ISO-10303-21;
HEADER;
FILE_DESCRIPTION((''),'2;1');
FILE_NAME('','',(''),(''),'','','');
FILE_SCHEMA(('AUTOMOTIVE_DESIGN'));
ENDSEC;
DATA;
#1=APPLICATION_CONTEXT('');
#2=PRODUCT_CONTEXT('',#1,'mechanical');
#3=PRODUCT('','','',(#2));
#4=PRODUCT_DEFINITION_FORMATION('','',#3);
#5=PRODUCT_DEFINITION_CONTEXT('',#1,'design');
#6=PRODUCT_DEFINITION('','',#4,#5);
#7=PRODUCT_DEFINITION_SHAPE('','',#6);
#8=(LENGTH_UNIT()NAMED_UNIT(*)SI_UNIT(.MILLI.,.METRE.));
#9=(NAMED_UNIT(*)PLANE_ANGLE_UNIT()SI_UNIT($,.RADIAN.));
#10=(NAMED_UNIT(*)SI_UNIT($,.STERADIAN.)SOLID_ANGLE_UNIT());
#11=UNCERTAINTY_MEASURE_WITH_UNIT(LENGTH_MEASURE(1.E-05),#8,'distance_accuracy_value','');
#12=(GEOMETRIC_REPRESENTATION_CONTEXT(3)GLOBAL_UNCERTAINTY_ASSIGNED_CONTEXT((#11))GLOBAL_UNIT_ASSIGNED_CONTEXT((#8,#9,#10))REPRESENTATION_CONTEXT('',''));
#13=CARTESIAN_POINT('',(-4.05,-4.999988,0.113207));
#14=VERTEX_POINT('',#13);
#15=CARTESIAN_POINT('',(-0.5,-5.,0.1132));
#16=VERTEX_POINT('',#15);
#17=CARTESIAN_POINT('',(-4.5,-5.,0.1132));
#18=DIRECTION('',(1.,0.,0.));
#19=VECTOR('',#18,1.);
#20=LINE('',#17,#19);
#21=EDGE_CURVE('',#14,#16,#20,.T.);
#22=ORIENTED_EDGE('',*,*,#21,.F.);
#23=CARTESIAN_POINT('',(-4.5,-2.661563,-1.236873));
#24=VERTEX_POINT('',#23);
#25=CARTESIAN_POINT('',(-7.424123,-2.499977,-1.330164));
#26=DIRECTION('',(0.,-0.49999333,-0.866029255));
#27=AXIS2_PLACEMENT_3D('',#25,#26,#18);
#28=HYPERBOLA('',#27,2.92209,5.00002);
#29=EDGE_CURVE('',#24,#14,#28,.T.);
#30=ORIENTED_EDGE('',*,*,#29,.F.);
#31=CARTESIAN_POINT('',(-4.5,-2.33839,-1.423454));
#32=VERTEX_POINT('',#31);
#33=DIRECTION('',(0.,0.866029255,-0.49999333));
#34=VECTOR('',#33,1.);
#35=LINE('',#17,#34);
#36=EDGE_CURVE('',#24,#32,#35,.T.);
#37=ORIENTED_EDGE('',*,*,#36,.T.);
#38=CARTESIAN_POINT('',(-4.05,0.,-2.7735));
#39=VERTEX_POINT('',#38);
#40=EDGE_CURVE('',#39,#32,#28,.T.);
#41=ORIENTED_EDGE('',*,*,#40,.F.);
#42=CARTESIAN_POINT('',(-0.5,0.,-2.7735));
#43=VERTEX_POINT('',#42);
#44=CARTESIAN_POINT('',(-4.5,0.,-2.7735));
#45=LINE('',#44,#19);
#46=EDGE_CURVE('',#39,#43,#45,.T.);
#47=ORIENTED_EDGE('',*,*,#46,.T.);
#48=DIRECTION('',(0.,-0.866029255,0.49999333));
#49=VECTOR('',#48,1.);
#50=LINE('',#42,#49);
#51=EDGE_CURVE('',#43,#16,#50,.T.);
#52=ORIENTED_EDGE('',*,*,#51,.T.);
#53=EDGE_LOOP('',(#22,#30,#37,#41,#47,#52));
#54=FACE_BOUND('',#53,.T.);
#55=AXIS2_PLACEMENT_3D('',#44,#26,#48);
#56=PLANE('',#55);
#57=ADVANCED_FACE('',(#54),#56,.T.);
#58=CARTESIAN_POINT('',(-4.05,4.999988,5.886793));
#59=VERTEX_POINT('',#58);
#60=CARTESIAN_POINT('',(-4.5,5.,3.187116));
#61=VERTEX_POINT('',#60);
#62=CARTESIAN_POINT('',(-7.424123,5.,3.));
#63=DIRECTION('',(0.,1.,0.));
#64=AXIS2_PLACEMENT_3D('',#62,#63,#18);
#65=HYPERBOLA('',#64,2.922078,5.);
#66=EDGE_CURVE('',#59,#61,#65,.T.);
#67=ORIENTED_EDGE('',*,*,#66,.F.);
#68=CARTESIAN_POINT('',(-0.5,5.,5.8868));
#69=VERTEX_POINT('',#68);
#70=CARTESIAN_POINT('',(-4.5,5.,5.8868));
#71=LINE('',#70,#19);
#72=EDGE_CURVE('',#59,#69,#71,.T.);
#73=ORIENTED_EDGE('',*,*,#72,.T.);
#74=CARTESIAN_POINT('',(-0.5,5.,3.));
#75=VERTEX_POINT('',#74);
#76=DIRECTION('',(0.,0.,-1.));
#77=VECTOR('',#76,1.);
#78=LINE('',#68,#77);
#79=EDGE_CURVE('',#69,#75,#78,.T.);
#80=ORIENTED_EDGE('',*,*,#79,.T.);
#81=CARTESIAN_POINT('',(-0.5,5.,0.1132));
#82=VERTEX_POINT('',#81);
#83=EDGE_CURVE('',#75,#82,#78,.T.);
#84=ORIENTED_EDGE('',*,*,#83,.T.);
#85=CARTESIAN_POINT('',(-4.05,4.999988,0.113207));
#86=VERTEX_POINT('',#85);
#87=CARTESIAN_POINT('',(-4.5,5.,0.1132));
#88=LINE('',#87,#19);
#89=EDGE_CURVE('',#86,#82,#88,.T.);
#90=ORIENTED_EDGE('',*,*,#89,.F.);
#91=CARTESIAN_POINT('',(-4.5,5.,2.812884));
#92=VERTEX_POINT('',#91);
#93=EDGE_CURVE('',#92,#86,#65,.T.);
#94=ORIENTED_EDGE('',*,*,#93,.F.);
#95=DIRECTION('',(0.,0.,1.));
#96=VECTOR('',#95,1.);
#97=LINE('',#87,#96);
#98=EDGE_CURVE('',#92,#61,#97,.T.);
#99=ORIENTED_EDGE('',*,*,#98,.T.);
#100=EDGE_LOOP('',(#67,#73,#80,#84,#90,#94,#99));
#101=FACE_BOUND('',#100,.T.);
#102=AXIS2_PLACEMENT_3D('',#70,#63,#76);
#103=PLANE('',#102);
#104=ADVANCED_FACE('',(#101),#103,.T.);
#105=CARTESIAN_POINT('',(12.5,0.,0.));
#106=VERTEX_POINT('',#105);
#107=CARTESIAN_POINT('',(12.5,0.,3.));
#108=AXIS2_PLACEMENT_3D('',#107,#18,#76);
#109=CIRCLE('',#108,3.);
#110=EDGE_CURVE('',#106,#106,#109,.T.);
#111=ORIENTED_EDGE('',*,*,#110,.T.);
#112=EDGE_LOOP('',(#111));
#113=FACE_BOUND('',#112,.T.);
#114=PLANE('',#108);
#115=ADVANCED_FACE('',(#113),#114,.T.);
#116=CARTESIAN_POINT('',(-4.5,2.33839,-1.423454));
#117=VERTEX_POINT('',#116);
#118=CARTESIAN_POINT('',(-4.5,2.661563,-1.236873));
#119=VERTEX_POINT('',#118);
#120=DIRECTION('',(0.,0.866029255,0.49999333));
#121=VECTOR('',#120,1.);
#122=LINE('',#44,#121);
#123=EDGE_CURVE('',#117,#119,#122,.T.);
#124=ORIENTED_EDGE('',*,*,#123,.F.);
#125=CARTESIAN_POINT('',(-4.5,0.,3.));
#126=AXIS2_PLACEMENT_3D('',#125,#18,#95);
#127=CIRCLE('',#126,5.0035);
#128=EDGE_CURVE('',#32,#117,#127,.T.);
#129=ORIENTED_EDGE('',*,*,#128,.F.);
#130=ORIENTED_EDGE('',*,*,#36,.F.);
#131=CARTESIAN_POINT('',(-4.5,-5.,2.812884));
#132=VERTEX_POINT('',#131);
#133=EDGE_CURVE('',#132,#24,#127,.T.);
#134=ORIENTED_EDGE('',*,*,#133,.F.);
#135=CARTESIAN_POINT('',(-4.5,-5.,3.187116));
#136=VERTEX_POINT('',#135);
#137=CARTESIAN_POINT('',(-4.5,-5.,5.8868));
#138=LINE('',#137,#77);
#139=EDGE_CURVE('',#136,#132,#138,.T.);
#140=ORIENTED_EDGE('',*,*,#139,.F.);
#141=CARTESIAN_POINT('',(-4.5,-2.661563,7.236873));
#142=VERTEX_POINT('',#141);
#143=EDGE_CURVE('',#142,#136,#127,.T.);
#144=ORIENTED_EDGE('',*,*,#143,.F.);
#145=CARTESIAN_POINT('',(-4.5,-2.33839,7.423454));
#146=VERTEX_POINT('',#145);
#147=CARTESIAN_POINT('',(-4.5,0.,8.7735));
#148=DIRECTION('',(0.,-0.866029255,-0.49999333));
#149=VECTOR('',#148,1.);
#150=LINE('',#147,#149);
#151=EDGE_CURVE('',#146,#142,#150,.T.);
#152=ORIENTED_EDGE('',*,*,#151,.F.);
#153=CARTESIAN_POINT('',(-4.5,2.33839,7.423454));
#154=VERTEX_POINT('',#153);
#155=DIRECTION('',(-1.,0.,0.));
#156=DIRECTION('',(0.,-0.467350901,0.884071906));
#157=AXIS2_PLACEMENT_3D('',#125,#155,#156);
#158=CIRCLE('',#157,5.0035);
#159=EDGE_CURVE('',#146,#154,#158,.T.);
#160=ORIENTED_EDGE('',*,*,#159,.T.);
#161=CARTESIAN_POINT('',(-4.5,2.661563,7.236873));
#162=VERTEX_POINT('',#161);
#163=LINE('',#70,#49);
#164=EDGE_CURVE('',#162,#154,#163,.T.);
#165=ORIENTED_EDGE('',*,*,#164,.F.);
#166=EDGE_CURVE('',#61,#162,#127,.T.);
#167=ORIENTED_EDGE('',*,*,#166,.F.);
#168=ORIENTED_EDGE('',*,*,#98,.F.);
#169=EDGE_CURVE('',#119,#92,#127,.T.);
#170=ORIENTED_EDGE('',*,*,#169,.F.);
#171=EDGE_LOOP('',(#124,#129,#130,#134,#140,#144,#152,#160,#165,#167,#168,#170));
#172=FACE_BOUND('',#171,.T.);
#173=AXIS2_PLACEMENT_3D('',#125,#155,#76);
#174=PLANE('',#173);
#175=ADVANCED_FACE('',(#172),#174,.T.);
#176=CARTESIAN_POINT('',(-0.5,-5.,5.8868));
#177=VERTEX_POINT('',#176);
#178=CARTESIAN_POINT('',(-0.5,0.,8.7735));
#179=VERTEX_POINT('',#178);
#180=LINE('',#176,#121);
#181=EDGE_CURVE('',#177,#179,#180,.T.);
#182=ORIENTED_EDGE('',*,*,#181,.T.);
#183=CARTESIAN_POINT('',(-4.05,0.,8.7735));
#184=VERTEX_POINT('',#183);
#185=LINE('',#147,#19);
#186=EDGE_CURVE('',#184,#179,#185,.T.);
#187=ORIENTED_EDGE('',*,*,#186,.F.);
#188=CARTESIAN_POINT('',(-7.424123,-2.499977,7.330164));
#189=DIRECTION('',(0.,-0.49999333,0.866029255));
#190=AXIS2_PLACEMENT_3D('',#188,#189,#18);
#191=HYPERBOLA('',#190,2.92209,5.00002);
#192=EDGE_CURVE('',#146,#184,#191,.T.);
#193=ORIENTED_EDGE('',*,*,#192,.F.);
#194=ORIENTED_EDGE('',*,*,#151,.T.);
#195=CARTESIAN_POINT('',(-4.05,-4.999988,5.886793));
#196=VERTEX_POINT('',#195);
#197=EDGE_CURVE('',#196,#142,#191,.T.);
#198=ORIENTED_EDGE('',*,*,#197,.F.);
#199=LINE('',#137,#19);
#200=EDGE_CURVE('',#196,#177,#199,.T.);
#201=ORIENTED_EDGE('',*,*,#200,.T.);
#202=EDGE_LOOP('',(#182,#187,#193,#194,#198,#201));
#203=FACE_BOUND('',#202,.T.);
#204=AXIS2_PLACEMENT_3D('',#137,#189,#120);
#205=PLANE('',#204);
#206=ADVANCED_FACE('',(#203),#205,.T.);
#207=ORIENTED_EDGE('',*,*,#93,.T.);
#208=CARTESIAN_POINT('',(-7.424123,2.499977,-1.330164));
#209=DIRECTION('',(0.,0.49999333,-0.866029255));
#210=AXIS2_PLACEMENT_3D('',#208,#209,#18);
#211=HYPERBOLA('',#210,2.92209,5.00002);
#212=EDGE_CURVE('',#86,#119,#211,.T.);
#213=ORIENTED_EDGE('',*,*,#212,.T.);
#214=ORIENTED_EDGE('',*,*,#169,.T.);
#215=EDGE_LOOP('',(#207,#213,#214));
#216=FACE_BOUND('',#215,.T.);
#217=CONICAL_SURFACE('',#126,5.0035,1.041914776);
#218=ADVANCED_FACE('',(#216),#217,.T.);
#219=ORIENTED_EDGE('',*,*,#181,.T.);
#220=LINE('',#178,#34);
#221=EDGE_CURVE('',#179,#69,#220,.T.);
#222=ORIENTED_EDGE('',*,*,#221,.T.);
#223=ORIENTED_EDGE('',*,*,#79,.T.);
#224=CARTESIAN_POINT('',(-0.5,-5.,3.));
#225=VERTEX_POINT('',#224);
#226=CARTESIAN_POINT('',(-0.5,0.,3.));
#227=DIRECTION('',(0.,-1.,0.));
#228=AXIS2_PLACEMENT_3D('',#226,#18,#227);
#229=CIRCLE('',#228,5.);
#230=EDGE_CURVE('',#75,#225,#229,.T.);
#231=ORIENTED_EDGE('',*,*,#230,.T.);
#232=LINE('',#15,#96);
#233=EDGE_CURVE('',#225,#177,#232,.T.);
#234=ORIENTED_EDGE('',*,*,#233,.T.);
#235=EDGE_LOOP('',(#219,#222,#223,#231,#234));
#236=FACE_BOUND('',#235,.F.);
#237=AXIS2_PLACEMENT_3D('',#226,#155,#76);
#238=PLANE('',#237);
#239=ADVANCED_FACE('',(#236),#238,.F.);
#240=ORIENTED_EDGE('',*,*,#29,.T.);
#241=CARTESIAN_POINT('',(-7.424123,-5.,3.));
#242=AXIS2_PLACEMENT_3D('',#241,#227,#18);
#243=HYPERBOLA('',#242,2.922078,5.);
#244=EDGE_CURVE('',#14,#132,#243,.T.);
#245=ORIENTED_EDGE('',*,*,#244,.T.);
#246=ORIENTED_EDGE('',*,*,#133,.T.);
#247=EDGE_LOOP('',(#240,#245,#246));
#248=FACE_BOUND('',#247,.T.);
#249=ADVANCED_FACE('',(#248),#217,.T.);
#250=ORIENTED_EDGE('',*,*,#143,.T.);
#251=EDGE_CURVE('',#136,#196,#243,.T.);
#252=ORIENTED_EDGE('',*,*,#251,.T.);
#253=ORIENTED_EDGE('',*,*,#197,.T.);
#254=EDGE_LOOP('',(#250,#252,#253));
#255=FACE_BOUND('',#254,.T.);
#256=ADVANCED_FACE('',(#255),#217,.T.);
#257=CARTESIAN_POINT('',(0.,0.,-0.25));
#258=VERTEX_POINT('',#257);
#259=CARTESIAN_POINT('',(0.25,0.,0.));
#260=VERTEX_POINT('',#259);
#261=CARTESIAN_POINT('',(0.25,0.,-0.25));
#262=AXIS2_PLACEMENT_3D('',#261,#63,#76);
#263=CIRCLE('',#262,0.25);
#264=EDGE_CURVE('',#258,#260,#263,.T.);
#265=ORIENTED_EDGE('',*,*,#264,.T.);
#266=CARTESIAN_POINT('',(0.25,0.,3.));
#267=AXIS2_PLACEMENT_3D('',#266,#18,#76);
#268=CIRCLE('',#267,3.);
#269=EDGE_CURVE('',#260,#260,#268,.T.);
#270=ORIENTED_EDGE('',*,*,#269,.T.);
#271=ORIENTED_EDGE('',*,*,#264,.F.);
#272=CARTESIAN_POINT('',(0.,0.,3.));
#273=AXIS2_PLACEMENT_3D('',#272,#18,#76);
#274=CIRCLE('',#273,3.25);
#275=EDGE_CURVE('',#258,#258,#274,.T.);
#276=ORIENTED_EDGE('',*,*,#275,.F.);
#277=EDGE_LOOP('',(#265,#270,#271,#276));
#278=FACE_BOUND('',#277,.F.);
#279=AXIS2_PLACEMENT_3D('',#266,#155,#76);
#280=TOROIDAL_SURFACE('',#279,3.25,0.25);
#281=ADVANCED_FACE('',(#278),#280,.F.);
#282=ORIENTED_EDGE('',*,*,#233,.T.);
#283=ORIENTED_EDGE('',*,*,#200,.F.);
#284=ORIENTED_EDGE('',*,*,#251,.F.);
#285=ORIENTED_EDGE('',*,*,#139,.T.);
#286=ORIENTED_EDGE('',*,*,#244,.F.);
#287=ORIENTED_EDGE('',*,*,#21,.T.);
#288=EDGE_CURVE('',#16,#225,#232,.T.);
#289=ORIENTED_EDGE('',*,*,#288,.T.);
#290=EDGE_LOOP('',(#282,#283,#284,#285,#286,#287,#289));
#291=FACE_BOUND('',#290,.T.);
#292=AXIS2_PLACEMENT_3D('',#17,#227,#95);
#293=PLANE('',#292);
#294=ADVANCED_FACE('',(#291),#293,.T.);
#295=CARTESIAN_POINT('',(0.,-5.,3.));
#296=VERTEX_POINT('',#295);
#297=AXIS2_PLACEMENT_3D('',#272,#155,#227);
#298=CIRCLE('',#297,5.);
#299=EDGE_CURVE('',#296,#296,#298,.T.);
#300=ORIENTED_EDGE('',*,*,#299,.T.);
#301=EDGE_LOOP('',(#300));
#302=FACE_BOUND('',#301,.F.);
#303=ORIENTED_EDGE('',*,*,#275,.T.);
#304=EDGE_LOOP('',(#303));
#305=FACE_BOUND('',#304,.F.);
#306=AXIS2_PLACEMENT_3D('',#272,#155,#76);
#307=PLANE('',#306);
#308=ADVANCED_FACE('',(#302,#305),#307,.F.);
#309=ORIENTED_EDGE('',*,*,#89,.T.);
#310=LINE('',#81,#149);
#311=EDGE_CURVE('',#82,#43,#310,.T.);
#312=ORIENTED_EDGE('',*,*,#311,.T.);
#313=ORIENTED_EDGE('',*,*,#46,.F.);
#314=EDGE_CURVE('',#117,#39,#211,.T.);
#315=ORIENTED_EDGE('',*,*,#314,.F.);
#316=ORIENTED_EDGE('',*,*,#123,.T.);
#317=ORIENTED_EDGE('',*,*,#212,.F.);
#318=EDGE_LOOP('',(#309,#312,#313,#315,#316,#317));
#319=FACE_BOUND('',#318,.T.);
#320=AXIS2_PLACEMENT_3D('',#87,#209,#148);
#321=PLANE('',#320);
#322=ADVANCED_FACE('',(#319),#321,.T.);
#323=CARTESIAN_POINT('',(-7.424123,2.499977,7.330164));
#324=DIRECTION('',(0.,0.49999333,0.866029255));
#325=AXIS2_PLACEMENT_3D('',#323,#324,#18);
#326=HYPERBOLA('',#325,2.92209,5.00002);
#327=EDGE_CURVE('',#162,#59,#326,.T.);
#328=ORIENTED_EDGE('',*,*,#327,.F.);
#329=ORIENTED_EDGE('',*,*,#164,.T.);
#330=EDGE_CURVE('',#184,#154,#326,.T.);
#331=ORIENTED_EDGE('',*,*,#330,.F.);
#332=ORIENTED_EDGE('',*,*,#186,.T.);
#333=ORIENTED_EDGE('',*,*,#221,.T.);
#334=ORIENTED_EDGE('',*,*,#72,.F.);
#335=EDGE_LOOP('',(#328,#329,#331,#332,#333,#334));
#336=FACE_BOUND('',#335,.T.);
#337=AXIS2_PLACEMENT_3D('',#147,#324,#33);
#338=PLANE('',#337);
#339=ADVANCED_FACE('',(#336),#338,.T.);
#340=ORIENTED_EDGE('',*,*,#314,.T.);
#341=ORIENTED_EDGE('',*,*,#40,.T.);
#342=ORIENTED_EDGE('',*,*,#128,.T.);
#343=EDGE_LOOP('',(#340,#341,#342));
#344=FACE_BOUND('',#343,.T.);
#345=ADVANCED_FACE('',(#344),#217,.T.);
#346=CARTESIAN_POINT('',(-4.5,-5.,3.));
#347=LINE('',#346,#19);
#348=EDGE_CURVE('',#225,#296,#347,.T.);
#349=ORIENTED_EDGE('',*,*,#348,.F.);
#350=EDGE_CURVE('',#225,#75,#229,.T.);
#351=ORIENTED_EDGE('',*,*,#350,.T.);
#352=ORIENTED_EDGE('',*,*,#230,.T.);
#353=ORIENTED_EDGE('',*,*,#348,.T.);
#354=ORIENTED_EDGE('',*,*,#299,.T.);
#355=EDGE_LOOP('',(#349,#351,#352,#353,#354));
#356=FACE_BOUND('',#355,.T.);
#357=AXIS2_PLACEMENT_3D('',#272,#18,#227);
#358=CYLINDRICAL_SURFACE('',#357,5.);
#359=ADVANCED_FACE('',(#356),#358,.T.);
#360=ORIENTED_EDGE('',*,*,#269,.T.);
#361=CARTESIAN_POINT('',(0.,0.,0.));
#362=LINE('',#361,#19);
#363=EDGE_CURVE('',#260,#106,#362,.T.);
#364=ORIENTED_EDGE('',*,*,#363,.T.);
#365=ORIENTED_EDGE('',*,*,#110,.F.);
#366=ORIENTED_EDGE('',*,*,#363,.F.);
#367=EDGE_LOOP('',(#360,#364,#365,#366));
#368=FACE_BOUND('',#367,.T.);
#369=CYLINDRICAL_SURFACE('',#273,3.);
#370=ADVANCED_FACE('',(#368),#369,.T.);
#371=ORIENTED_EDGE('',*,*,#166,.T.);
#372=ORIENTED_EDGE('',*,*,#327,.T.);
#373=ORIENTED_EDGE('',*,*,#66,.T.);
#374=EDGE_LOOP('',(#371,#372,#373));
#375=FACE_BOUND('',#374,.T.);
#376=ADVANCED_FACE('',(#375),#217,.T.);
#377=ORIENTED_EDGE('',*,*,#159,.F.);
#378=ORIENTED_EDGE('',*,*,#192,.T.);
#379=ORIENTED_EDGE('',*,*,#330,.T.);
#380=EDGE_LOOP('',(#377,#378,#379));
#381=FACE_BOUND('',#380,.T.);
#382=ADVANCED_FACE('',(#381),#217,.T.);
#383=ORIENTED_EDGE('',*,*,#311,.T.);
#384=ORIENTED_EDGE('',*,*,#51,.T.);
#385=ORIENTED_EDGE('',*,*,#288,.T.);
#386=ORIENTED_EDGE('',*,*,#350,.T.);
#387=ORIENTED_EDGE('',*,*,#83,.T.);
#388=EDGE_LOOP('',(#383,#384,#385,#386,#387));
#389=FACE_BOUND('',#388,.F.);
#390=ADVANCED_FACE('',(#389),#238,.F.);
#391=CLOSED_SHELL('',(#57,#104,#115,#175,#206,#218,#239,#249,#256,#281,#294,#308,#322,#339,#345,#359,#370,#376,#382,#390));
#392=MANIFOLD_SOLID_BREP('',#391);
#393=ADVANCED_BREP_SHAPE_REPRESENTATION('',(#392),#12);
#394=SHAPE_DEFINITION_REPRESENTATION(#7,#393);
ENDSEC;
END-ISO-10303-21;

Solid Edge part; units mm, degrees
sketch "Sketch1" plane through (0, 0, 0) normal (0, -1, 0) x (1, 0, 0)
  line L0 (12.5, 0) -> (12.5, 3)
  line L1 (0, 3) -> (12.5, 3)
  line L2 (0, 3) -> (0, 0)
  line L3 (0, 0) -> (12.5, 0)
revolve "RevolvedProtrusion1" add sketch "Sketch1" angle 360 about axis through (0, 0, 3) along (1, 0, 0)
sketch "Sketch2" plane through (0, 0, 3) normal (-1, 0, 0) x (0, -1, 0)
  circle A0 centre (0, 0) radius 5
extrude "Protrusion1" add sketch "Sketch2" along normal blind 0.5
sketch "Sketch3" plane through (-0.5, 0, 3) normal (-1, 0, 0) x (0, -1, 0)
  circle A0 centre (0, 0) radius 5
extrude "Protrusão_Extrudada_5" add sketch "Sketch3" along normal blind 4
sketch "Sketch4" plane through (-4.5, 0, 3) normal (-1, 0, 0) x (0, -1, 0)
  line L0 (-5, 2.8868) -> (-5, -2.8868)
  line L1 (-5, -2.8868) -> (0, -5.7735)
  line L2 (0, -5.7735) -> (5, -2.8868)
  line L3 (5, -2.8868) -> (5, 2.8868)
  line L4 (5, 2.8868) -> (0, 5.7735)
  line L5 (0, 5.7735) -> (-5, 2.8868)
extrude "Protrusão_Extrudada_8" add sketch "Sketch4" against normal blind 4
fillet "Redondo_2" radius 0.25 1 edges at (0, 0, 6)
sketch "Sketch5" plane through (0, 0, 0) normal (0, 1, 0) x (-1, 0, 0)
  line L0 (4.5, 8.7735) -> (4.05, 8.7735)
  line L1 (4.5, 8.0035) -> (4.05, 8.7735)
  line L2 (4.5, 8.7735) -> (4.5, 8.0035)
revolve "RevolvedCutout1" cut sketch "Sketch5" angle 360 about axis through (-4.5, 0, 3) along (1, 0, 0)
properties material "Polypropylene, high impact"
